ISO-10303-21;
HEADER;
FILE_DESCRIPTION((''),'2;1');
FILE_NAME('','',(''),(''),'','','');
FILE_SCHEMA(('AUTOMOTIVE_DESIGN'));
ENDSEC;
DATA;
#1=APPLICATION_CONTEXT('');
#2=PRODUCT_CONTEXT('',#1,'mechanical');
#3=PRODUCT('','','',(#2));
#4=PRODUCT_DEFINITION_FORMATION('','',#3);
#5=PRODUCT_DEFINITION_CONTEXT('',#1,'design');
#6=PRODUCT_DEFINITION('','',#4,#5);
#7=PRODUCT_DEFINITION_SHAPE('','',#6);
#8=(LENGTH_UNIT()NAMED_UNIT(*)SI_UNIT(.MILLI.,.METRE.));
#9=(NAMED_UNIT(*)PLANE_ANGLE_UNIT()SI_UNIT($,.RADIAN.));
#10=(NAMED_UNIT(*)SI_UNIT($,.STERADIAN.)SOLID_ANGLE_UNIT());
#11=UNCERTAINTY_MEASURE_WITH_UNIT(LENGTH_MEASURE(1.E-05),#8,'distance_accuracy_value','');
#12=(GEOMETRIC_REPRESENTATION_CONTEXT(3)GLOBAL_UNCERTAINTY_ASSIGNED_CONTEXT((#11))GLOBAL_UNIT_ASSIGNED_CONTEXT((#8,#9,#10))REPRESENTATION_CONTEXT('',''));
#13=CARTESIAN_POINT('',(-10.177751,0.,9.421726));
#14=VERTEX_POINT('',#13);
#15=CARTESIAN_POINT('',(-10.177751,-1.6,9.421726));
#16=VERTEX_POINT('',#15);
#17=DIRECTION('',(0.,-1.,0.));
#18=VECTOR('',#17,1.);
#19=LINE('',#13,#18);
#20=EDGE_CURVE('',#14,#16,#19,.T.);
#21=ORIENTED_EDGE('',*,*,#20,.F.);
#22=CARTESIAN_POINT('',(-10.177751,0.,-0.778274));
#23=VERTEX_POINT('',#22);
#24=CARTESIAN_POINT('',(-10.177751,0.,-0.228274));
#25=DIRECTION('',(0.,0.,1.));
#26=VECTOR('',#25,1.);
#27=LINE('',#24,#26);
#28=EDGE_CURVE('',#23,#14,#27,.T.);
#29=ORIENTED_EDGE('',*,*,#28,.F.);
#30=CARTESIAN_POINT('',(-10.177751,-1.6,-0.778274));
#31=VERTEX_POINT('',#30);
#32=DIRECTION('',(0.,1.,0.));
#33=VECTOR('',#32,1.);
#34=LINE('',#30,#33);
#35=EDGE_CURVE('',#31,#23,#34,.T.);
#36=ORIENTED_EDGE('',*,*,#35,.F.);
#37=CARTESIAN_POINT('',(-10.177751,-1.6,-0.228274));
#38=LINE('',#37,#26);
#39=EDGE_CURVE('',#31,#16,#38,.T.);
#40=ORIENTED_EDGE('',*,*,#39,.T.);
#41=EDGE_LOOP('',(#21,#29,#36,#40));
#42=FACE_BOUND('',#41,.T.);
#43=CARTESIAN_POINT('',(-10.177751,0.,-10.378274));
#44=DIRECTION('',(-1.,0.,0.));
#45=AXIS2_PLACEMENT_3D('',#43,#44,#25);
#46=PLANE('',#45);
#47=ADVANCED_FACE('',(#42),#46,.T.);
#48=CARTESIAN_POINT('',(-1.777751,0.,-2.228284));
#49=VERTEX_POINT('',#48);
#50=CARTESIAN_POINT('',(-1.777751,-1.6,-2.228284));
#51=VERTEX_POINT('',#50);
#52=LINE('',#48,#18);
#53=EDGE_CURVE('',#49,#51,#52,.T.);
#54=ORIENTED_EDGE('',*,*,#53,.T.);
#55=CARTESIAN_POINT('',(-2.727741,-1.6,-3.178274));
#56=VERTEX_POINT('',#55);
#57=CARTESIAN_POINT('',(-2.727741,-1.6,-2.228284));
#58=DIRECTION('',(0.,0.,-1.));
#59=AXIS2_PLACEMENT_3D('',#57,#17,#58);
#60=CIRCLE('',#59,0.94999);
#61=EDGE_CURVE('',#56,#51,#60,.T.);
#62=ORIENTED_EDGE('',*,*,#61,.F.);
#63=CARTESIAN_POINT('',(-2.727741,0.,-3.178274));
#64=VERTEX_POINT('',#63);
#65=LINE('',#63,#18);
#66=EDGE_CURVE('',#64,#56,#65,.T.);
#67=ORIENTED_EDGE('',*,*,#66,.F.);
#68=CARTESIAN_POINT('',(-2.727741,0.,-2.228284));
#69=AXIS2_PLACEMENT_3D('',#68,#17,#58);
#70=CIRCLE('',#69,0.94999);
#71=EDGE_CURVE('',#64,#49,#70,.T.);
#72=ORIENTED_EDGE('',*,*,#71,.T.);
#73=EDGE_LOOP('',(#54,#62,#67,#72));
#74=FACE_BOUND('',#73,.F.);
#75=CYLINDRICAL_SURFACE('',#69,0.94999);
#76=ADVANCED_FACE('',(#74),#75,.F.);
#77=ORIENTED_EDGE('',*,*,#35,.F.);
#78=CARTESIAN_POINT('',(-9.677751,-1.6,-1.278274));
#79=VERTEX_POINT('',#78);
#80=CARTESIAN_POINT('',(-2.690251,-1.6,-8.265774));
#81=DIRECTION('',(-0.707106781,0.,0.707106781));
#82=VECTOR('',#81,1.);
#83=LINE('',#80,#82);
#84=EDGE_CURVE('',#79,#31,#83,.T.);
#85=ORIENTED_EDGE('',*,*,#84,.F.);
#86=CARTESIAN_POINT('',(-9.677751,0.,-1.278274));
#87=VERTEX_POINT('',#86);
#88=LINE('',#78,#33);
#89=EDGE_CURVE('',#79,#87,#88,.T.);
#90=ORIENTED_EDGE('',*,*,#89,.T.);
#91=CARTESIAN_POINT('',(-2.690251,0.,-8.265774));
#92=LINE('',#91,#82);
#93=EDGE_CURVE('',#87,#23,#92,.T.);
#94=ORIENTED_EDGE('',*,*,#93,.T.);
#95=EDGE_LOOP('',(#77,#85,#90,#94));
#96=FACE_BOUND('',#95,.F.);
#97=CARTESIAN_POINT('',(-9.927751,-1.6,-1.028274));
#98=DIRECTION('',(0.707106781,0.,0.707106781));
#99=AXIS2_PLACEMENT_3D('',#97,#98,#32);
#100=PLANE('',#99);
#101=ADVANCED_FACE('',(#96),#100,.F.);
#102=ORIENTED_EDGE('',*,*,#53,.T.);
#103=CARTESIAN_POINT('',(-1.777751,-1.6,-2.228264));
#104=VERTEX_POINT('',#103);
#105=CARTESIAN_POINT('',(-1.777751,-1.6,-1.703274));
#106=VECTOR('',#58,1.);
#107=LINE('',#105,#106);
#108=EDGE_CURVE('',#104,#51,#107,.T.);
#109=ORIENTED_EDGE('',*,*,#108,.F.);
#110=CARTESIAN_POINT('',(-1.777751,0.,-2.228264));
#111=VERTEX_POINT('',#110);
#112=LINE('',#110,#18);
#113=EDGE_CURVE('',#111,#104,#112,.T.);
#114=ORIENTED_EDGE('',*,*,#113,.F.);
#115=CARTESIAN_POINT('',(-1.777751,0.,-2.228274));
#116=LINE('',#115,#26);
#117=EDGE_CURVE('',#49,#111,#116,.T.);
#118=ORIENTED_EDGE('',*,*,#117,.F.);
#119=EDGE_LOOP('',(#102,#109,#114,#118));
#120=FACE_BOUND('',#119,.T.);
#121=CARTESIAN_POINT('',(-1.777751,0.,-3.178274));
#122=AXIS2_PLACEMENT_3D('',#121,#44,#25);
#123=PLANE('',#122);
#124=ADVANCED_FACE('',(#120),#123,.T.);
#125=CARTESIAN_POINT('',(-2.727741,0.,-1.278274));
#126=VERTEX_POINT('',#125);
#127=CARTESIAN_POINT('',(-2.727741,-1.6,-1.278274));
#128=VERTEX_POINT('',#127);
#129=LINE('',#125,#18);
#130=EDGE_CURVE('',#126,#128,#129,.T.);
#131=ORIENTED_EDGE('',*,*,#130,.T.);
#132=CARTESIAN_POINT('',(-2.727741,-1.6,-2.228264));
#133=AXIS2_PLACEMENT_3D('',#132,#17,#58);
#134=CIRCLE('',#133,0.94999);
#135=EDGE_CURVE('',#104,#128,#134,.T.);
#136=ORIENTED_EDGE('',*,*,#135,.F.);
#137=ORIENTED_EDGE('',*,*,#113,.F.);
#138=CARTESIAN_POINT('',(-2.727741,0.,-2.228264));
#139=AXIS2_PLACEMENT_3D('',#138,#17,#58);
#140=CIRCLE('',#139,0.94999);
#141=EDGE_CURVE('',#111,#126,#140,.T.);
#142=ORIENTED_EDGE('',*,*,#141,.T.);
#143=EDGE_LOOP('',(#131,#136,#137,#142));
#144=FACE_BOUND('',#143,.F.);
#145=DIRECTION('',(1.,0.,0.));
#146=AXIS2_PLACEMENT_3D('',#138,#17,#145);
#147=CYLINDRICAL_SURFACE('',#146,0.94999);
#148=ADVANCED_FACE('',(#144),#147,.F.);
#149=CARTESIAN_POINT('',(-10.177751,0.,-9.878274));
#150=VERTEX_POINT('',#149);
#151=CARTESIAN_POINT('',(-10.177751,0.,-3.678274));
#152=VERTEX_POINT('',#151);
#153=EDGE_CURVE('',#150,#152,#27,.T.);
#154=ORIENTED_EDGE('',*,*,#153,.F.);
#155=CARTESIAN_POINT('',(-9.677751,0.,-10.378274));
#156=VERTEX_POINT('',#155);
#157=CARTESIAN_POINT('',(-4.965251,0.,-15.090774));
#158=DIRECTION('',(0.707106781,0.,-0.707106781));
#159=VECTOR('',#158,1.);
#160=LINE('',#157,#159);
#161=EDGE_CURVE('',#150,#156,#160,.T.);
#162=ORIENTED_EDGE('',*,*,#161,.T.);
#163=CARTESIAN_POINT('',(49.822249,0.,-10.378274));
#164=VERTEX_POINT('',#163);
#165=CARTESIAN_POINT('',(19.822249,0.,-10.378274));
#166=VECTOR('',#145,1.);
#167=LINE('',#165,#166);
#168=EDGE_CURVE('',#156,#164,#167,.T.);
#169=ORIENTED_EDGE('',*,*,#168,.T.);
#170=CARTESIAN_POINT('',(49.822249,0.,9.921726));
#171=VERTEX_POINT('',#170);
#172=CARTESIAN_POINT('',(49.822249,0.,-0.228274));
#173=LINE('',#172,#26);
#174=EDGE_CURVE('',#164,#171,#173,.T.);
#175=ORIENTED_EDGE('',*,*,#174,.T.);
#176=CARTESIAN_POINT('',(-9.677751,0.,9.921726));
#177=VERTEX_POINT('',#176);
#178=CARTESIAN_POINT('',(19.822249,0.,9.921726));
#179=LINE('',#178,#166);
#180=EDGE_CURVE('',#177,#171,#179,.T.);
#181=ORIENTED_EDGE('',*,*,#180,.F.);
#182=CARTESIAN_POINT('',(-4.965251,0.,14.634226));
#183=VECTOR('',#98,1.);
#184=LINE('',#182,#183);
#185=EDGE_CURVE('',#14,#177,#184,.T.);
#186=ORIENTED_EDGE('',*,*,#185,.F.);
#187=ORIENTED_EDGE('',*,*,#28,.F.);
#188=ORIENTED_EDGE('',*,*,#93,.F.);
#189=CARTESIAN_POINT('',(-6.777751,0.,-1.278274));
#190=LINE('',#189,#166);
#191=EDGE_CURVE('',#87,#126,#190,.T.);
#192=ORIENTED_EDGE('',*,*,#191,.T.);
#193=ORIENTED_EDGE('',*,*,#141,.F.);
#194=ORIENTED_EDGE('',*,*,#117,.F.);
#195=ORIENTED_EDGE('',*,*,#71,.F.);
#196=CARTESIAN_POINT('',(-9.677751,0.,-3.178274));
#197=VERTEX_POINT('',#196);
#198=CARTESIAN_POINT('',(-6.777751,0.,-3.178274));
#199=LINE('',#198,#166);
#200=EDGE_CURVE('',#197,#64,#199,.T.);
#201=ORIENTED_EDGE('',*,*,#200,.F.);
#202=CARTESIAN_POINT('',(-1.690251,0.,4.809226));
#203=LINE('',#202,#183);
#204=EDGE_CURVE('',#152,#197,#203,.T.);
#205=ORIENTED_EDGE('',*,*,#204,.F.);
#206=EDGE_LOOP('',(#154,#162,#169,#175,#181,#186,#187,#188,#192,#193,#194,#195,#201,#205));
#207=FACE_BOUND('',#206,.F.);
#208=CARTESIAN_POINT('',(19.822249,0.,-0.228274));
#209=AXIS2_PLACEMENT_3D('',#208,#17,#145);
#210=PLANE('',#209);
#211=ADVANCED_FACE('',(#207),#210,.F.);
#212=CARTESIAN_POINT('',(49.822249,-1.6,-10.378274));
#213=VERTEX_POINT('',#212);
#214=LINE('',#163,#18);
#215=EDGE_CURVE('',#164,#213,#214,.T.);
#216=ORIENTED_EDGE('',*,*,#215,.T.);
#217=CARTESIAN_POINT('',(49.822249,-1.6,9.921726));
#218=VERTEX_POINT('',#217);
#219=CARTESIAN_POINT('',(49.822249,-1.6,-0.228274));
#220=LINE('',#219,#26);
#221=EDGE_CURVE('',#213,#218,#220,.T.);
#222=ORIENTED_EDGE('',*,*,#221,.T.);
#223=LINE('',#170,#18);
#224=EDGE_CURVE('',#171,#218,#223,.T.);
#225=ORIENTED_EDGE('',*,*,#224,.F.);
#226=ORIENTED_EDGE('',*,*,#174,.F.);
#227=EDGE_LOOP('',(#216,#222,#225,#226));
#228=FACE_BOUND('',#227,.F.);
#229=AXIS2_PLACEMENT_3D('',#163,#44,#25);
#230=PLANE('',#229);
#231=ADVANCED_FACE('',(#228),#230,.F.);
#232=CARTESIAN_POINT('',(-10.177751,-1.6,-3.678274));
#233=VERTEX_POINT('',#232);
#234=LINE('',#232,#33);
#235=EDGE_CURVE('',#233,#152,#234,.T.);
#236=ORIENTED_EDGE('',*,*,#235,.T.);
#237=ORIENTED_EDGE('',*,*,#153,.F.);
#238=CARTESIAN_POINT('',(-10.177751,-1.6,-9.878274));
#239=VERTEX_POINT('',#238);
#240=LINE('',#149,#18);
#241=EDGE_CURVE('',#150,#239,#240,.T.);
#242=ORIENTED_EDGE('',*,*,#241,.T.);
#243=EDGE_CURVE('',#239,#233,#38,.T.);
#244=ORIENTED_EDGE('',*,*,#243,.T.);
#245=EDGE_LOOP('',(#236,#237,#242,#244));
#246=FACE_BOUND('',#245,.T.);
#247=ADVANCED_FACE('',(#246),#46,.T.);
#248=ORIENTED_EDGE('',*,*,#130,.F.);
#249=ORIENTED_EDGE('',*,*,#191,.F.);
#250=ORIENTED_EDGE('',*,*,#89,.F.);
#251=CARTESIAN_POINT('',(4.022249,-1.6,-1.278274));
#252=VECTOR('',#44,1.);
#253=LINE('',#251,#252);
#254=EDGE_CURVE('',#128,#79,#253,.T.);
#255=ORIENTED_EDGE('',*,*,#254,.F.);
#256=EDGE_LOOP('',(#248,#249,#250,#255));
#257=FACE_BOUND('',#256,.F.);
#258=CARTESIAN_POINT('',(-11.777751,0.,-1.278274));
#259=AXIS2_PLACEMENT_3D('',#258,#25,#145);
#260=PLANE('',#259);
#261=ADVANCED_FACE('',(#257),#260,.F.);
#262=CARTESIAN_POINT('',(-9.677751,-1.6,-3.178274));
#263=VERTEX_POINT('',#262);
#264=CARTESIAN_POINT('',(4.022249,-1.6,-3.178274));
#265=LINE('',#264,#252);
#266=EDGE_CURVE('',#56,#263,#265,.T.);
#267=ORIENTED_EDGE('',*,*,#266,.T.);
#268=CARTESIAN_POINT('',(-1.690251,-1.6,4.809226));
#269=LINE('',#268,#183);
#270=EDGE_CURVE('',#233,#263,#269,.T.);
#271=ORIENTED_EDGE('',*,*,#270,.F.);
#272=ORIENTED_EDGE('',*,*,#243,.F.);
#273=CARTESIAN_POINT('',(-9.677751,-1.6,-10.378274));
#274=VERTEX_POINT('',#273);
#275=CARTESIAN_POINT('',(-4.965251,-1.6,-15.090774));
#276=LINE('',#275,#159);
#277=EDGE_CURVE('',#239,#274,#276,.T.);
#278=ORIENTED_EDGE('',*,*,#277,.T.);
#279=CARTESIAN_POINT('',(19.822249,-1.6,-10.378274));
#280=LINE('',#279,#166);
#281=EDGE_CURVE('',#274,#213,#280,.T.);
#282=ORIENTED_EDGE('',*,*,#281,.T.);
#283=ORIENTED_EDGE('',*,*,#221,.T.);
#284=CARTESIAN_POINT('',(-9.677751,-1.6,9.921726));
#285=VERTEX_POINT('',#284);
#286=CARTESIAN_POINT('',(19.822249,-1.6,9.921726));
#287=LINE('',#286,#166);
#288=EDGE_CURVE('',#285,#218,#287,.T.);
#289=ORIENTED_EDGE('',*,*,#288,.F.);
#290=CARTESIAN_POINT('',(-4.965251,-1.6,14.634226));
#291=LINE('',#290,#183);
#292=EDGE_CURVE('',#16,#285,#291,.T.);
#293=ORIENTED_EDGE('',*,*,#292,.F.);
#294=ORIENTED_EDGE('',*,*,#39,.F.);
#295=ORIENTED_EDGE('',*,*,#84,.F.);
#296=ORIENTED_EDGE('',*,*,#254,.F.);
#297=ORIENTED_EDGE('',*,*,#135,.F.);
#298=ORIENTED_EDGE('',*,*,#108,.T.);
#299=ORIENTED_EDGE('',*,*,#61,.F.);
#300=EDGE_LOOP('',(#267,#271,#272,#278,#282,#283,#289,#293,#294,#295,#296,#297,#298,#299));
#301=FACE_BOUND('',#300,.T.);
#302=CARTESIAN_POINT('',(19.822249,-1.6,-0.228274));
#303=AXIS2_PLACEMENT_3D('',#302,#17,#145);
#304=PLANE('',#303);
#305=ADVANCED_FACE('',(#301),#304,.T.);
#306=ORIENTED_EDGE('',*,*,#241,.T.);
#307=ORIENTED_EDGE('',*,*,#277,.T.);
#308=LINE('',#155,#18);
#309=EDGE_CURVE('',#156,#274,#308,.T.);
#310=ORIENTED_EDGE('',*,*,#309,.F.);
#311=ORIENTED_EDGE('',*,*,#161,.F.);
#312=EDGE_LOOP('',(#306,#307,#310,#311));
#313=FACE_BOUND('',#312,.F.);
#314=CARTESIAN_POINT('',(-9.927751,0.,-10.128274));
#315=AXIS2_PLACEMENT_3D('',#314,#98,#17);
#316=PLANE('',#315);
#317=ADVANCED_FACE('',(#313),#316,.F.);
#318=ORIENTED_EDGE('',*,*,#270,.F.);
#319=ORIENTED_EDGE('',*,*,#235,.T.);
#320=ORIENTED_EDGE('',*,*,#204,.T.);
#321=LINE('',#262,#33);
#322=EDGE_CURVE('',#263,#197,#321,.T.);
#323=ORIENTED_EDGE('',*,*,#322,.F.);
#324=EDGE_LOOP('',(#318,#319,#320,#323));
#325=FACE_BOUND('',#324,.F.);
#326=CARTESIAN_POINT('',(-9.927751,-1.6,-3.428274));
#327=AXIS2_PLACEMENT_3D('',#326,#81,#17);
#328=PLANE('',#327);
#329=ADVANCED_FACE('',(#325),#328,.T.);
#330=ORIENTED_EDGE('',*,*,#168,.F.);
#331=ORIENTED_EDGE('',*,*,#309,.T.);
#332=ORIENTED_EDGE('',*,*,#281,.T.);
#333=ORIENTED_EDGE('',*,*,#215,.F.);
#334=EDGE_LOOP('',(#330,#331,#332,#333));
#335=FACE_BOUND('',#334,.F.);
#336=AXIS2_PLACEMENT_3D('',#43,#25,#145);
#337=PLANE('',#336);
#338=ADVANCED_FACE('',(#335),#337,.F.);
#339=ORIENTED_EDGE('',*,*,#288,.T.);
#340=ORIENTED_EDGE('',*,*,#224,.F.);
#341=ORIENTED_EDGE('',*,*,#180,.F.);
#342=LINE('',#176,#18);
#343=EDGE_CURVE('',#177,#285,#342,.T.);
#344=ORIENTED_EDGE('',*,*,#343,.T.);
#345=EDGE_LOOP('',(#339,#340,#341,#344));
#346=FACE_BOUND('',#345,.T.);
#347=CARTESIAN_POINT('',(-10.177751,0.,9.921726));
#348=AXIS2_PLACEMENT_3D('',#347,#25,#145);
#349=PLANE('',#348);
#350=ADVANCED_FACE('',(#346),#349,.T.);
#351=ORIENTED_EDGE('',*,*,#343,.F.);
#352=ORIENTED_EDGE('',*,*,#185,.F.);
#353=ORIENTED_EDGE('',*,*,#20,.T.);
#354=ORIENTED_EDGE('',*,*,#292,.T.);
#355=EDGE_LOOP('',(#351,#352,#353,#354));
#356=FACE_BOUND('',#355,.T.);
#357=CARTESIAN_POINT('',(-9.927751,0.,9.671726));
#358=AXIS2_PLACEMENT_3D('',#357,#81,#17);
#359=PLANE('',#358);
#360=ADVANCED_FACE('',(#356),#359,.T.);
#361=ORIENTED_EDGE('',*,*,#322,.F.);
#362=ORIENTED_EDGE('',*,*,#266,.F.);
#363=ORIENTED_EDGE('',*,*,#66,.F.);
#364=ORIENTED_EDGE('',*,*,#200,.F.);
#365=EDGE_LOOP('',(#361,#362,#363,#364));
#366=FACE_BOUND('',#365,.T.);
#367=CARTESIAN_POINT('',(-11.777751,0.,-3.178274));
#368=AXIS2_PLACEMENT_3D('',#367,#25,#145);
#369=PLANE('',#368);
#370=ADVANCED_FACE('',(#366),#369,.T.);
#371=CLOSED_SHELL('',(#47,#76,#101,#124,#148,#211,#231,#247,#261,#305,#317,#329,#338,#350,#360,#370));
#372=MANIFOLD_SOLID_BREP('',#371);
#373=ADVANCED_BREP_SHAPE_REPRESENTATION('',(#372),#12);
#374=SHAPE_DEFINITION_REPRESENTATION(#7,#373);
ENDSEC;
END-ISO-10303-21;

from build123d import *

# Parameters (mm, degrees)
F0_W     = 60
F0_H     = 20.3
F1_DEPTH = 1.6
F2_W     = 10
F2_H     = 1.9
F3_DEPTH = 25
F4_SIZE  = 0.5
F5_R     = 0.94999


# Not quite as in the source:
# - a fillet or chamfer is up to 0.001 mm smaller than in the source, because OpenCascade refuses the exact size


with BuildPart() as f1:
    # F0 (on Front) → F1 (new body)
    with BuildSketch(Plane.XZ):
        with Locations((19.8222492922, -0.2282736823)):
            Rectangle(F0_W, F0_H)
    extrude(amount=F1_DEPTH)

    # F2 (on Front) → F3 (cut)
    with BuildSketch(Plane.XZ):
        with Locations((-6.7777507078, -2.2282736823)):
            Rectangle(F2_W, F2_H)
    extrude(amount=F3_DEPTH, mode=Mode.SUBTRACT)

    # F4
    f4_edges = [f1.edges().sort_by_distance(p)[0] for p in [
        (-10.177751, -0.8, 9.921726),
        (-10.177751, -0.8, -1.278274),
        (-10.177751, -0.8, -3.178274),
        (-10.177751, -0.8, -10.378274),
    ]]
    chamfer(f4_edges, length=F4_SIZE)

    # F5 (radius 0.95 in the source; OpenCascade refuses exactly that, so slightly less here)
    f5_edges = [f1.edges().sort_by_distance(p)[0] for p in [
        (-1.777751, -0.8, -1.278274),
        (-1.777751, -0.8, -3.178274),
    ]]
    fillet(f5_edges, radius=F5_R)


solid = f1.part
